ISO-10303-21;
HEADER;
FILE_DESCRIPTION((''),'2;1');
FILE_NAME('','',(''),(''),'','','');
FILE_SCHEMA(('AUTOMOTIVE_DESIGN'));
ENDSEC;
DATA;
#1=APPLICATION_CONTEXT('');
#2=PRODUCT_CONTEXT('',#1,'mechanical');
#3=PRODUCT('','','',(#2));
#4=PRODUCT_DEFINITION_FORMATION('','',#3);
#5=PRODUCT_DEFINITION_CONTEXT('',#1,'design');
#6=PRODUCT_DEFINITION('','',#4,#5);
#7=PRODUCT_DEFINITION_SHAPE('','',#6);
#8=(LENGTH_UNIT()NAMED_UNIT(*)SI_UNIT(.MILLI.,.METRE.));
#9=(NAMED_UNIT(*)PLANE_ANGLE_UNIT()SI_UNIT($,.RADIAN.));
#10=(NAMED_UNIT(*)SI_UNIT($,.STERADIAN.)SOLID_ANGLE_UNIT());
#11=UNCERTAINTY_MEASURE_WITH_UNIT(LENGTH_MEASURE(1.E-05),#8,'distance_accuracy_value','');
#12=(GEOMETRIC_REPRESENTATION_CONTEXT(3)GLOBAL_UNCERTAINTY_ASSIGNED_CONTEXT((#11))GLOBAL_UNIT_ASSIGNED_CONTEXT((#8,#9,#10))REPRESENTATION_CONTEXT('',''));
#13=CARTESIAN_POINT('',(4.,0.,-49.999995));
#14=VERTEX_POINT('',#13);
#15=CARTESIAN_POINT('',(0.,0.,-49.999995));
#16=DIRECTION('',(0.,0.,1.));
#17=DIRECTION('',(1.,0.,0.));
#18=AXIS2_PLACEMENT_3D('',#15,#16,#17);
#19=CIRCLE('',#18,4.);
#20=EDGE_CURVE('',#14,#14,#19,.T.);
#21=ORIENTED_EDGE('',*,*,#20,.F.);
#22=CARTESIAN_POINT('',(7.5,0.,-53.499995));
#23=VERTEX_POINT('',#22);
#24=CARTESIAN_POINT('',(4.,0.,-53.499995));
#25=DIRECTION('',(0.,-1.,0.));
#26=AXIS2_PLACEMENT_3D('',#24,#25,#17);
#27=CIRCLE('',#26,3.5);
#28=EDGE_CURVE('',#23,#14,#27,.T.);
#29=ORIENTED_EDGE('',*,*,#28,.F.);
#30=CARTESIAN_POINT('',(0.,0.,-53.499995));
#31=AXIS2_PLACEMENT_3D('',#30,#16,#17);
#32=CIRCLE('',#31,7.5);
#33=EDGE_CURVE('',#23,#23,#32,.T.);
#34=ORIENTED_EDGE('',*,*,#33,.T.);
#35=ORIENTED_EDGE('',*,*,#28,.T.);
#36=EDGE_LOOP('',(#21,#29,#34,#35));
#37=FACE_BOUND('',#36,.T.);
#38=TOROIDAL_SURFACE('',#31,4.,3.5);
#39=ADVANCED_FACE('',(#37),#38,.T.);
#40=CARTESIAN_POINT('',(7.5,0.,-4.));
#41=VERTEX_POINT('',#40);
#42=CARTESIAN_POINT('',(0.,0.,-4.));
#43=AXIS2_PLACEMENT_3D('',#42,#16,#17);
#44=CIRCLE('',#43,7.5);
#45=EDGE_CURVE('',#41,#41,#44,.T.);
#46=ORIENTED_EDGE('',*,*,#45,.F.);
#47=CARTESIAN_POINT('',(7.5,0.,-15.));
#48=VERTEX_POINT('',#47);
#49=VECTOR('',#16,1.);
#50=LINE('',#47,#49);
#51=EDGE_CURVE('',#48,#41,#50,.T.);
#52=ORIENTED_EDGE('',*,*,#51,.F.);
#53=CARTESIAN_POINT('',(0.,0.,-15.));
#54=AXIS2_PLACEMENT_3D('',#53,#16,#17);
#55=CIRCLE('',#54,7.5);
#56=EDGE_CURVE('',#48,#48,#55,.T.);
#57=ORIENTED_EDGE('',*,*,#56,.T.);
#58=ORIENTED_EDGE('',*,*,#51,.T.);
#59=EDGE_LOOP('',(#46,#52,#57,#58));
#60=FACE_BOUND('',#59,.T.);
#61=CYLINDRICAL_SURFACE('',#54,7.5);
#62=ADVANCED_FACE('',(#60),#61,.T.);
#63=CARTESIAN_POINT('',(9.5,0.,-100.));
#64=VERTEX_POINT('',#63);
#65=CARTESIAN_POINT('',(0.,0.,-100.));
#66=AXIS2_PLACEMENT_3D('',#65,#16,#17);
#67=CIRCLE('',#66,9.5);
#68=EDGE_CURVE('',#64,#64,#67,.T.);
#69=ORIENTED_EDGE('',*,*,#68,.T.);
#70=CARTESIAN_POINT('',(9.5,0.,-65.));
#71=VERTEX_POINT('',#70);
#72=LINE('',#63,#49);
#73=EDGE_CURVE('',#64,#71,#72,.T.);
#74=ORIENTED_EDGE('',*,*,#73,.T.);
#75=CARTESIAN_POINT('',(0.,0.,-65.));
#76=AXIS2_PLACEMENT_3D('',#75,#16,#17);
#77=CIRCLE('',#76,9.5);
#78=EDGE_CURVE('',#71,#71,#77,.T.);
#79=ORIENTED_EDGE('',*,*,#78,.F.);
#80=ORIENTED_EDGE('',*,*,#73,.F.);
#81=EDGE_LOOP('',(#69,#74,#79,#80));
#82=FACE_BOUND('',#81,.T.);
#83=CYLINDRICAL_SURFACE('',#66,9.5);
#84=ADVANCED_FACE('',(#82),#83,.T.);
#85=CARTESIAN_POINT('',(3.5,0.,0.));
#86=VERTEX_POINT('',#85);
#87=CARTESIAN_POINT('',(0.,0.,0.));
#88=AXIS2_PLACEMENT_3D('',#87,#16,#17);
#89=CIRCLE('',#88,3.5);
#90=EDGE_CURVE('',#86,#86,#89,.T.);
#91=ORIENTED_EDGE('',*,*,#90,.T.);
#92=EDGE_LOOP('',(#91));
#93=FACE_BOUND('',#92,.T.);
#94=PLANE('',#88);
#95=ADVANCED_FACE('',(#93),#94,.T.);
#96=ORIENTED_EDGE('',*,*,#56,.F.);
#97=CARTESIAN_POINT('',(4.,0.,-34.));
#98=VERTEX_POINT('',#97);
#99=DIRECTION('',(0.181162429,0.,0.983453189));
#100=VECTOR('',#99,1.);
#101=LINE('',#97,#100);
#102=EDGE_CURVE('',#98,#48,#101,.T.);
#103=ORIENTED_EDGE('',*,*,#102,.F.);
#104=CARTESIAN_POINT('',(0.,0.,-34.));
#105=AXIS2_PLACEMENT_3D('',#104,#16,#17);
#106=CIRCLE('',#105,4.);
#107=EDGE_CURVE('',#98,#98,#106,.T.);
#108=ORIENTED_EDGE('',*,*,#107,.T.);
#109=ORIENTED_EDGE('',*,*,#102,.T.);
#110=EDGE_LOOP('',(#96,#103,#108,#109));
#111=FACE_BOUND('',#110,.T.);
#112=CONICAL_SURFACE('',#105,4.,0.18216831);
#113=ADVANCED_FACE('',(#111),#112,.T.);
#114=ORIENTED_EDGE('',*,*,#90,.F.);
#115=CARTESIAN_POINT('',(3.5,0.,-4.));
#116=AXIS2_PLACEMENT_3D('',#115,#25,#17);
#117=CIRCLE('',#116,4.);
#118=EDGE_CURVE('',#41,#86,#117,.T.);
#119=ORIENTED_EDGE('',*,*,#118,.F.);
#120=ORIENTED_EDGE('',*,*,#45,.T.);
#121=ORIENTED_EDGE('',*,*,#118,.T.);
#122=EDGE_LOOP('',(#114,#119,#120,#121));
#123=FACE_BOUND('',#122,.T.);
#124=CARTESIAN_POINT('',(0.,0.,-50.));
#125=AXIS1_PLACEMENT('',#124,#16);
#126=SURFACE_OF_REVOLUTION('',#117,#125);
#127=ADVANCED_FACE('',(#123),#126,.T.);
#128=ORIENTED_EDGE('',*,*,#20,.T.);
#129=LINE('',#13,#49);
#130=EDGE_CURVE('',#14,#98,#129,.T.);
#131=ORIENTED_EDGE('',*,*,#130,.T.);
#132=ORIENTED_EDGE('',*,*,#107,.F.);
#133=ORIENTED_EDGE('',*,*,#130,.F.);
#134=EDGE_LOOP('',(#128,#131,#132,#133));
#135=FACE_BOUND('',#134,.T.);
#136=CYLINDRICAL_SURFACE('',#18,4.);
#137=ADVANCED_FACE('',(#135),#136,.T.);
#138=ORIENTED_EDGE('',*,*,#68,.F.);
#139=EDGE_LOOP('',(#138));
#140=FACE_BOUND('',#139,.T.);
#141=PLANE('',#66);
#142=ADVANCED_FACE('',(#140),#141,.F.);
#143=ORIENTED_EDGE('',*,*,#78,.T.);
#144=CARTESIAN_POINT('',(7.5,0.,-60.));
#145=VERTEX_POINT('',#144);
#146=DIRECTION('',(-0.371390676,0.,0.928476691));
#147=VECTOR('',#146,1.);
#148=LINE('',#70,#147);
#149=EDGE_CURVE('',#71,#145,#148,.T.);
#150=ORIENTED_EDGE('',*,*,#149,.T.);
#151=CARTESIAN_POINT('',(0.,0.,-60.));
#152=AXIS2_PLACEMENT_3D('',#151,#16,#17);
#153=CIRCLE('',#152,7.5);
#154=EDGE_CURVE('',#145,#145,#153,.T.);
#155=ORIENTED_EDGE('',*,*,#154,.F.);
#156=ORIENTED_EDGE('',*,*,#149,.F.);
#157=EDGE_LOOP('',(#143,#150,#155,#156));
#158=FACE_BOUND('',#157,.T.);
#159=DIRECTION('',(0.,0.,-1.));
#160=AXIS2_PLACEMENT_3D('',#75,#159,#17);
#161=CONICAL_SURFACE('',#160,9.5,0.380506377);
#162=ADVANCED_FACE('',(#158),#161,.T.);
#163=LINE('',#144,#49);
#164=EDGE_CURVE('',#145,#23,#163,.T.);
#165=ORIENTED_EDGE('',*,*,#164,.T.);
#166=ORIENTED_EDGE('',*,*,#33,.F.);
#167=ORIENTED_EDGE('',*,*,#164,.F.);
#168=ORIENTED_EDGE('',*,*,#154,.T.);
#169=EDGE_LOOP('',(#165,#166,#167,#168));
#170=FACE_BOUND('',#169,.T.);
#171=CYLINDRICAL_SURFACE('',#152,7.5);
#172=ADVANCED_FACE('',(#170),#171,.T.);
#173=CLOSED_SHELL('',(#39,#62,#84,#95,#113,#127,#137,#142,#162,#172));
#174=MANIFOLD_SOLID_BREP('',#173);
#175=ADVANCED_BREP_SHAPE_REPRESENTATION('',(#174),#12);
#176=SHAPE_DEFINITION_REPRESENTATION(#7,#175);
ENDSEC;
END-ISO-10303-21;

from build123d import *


# Not quite as in the source:
# - ends of sketch curves that miss each other by under 0.0002 mm in the source are joined


with BuildPart() as f1:
    # F0 (on Front) → F1 (revolve)
    with BuildSketch(Plane.XZ):
        with BuildLine():
            Line((3.5, 0), (0, 0))
            Line((0, 0), (0, -100))
            Line((0, -100), (9.5, -100))
            Line((9.5, -100), (9.5, -65))
            Line((9.5, -65), (7.5, -60))
            Line((7.5, -60), (7.5, -53.4999954539))
            ThreePointArc((7.5, -53.4999954539), (6.4748737342, -51.0251217197), (4, -49.9999954539))
            Line((4, -49.9999954539), (4, -34))
            Line((4, -34), (7.5, -15))
            Line((7.5, -15), (7.5, -4))
            ThreePointArc((7.5, -4), (6.3284271247, -1.1715728753), (3.5, 0))
        make_face()
    revolve(axis=Axis((0, 0, -50), (0, 0, 1)))


solid = f1.part
